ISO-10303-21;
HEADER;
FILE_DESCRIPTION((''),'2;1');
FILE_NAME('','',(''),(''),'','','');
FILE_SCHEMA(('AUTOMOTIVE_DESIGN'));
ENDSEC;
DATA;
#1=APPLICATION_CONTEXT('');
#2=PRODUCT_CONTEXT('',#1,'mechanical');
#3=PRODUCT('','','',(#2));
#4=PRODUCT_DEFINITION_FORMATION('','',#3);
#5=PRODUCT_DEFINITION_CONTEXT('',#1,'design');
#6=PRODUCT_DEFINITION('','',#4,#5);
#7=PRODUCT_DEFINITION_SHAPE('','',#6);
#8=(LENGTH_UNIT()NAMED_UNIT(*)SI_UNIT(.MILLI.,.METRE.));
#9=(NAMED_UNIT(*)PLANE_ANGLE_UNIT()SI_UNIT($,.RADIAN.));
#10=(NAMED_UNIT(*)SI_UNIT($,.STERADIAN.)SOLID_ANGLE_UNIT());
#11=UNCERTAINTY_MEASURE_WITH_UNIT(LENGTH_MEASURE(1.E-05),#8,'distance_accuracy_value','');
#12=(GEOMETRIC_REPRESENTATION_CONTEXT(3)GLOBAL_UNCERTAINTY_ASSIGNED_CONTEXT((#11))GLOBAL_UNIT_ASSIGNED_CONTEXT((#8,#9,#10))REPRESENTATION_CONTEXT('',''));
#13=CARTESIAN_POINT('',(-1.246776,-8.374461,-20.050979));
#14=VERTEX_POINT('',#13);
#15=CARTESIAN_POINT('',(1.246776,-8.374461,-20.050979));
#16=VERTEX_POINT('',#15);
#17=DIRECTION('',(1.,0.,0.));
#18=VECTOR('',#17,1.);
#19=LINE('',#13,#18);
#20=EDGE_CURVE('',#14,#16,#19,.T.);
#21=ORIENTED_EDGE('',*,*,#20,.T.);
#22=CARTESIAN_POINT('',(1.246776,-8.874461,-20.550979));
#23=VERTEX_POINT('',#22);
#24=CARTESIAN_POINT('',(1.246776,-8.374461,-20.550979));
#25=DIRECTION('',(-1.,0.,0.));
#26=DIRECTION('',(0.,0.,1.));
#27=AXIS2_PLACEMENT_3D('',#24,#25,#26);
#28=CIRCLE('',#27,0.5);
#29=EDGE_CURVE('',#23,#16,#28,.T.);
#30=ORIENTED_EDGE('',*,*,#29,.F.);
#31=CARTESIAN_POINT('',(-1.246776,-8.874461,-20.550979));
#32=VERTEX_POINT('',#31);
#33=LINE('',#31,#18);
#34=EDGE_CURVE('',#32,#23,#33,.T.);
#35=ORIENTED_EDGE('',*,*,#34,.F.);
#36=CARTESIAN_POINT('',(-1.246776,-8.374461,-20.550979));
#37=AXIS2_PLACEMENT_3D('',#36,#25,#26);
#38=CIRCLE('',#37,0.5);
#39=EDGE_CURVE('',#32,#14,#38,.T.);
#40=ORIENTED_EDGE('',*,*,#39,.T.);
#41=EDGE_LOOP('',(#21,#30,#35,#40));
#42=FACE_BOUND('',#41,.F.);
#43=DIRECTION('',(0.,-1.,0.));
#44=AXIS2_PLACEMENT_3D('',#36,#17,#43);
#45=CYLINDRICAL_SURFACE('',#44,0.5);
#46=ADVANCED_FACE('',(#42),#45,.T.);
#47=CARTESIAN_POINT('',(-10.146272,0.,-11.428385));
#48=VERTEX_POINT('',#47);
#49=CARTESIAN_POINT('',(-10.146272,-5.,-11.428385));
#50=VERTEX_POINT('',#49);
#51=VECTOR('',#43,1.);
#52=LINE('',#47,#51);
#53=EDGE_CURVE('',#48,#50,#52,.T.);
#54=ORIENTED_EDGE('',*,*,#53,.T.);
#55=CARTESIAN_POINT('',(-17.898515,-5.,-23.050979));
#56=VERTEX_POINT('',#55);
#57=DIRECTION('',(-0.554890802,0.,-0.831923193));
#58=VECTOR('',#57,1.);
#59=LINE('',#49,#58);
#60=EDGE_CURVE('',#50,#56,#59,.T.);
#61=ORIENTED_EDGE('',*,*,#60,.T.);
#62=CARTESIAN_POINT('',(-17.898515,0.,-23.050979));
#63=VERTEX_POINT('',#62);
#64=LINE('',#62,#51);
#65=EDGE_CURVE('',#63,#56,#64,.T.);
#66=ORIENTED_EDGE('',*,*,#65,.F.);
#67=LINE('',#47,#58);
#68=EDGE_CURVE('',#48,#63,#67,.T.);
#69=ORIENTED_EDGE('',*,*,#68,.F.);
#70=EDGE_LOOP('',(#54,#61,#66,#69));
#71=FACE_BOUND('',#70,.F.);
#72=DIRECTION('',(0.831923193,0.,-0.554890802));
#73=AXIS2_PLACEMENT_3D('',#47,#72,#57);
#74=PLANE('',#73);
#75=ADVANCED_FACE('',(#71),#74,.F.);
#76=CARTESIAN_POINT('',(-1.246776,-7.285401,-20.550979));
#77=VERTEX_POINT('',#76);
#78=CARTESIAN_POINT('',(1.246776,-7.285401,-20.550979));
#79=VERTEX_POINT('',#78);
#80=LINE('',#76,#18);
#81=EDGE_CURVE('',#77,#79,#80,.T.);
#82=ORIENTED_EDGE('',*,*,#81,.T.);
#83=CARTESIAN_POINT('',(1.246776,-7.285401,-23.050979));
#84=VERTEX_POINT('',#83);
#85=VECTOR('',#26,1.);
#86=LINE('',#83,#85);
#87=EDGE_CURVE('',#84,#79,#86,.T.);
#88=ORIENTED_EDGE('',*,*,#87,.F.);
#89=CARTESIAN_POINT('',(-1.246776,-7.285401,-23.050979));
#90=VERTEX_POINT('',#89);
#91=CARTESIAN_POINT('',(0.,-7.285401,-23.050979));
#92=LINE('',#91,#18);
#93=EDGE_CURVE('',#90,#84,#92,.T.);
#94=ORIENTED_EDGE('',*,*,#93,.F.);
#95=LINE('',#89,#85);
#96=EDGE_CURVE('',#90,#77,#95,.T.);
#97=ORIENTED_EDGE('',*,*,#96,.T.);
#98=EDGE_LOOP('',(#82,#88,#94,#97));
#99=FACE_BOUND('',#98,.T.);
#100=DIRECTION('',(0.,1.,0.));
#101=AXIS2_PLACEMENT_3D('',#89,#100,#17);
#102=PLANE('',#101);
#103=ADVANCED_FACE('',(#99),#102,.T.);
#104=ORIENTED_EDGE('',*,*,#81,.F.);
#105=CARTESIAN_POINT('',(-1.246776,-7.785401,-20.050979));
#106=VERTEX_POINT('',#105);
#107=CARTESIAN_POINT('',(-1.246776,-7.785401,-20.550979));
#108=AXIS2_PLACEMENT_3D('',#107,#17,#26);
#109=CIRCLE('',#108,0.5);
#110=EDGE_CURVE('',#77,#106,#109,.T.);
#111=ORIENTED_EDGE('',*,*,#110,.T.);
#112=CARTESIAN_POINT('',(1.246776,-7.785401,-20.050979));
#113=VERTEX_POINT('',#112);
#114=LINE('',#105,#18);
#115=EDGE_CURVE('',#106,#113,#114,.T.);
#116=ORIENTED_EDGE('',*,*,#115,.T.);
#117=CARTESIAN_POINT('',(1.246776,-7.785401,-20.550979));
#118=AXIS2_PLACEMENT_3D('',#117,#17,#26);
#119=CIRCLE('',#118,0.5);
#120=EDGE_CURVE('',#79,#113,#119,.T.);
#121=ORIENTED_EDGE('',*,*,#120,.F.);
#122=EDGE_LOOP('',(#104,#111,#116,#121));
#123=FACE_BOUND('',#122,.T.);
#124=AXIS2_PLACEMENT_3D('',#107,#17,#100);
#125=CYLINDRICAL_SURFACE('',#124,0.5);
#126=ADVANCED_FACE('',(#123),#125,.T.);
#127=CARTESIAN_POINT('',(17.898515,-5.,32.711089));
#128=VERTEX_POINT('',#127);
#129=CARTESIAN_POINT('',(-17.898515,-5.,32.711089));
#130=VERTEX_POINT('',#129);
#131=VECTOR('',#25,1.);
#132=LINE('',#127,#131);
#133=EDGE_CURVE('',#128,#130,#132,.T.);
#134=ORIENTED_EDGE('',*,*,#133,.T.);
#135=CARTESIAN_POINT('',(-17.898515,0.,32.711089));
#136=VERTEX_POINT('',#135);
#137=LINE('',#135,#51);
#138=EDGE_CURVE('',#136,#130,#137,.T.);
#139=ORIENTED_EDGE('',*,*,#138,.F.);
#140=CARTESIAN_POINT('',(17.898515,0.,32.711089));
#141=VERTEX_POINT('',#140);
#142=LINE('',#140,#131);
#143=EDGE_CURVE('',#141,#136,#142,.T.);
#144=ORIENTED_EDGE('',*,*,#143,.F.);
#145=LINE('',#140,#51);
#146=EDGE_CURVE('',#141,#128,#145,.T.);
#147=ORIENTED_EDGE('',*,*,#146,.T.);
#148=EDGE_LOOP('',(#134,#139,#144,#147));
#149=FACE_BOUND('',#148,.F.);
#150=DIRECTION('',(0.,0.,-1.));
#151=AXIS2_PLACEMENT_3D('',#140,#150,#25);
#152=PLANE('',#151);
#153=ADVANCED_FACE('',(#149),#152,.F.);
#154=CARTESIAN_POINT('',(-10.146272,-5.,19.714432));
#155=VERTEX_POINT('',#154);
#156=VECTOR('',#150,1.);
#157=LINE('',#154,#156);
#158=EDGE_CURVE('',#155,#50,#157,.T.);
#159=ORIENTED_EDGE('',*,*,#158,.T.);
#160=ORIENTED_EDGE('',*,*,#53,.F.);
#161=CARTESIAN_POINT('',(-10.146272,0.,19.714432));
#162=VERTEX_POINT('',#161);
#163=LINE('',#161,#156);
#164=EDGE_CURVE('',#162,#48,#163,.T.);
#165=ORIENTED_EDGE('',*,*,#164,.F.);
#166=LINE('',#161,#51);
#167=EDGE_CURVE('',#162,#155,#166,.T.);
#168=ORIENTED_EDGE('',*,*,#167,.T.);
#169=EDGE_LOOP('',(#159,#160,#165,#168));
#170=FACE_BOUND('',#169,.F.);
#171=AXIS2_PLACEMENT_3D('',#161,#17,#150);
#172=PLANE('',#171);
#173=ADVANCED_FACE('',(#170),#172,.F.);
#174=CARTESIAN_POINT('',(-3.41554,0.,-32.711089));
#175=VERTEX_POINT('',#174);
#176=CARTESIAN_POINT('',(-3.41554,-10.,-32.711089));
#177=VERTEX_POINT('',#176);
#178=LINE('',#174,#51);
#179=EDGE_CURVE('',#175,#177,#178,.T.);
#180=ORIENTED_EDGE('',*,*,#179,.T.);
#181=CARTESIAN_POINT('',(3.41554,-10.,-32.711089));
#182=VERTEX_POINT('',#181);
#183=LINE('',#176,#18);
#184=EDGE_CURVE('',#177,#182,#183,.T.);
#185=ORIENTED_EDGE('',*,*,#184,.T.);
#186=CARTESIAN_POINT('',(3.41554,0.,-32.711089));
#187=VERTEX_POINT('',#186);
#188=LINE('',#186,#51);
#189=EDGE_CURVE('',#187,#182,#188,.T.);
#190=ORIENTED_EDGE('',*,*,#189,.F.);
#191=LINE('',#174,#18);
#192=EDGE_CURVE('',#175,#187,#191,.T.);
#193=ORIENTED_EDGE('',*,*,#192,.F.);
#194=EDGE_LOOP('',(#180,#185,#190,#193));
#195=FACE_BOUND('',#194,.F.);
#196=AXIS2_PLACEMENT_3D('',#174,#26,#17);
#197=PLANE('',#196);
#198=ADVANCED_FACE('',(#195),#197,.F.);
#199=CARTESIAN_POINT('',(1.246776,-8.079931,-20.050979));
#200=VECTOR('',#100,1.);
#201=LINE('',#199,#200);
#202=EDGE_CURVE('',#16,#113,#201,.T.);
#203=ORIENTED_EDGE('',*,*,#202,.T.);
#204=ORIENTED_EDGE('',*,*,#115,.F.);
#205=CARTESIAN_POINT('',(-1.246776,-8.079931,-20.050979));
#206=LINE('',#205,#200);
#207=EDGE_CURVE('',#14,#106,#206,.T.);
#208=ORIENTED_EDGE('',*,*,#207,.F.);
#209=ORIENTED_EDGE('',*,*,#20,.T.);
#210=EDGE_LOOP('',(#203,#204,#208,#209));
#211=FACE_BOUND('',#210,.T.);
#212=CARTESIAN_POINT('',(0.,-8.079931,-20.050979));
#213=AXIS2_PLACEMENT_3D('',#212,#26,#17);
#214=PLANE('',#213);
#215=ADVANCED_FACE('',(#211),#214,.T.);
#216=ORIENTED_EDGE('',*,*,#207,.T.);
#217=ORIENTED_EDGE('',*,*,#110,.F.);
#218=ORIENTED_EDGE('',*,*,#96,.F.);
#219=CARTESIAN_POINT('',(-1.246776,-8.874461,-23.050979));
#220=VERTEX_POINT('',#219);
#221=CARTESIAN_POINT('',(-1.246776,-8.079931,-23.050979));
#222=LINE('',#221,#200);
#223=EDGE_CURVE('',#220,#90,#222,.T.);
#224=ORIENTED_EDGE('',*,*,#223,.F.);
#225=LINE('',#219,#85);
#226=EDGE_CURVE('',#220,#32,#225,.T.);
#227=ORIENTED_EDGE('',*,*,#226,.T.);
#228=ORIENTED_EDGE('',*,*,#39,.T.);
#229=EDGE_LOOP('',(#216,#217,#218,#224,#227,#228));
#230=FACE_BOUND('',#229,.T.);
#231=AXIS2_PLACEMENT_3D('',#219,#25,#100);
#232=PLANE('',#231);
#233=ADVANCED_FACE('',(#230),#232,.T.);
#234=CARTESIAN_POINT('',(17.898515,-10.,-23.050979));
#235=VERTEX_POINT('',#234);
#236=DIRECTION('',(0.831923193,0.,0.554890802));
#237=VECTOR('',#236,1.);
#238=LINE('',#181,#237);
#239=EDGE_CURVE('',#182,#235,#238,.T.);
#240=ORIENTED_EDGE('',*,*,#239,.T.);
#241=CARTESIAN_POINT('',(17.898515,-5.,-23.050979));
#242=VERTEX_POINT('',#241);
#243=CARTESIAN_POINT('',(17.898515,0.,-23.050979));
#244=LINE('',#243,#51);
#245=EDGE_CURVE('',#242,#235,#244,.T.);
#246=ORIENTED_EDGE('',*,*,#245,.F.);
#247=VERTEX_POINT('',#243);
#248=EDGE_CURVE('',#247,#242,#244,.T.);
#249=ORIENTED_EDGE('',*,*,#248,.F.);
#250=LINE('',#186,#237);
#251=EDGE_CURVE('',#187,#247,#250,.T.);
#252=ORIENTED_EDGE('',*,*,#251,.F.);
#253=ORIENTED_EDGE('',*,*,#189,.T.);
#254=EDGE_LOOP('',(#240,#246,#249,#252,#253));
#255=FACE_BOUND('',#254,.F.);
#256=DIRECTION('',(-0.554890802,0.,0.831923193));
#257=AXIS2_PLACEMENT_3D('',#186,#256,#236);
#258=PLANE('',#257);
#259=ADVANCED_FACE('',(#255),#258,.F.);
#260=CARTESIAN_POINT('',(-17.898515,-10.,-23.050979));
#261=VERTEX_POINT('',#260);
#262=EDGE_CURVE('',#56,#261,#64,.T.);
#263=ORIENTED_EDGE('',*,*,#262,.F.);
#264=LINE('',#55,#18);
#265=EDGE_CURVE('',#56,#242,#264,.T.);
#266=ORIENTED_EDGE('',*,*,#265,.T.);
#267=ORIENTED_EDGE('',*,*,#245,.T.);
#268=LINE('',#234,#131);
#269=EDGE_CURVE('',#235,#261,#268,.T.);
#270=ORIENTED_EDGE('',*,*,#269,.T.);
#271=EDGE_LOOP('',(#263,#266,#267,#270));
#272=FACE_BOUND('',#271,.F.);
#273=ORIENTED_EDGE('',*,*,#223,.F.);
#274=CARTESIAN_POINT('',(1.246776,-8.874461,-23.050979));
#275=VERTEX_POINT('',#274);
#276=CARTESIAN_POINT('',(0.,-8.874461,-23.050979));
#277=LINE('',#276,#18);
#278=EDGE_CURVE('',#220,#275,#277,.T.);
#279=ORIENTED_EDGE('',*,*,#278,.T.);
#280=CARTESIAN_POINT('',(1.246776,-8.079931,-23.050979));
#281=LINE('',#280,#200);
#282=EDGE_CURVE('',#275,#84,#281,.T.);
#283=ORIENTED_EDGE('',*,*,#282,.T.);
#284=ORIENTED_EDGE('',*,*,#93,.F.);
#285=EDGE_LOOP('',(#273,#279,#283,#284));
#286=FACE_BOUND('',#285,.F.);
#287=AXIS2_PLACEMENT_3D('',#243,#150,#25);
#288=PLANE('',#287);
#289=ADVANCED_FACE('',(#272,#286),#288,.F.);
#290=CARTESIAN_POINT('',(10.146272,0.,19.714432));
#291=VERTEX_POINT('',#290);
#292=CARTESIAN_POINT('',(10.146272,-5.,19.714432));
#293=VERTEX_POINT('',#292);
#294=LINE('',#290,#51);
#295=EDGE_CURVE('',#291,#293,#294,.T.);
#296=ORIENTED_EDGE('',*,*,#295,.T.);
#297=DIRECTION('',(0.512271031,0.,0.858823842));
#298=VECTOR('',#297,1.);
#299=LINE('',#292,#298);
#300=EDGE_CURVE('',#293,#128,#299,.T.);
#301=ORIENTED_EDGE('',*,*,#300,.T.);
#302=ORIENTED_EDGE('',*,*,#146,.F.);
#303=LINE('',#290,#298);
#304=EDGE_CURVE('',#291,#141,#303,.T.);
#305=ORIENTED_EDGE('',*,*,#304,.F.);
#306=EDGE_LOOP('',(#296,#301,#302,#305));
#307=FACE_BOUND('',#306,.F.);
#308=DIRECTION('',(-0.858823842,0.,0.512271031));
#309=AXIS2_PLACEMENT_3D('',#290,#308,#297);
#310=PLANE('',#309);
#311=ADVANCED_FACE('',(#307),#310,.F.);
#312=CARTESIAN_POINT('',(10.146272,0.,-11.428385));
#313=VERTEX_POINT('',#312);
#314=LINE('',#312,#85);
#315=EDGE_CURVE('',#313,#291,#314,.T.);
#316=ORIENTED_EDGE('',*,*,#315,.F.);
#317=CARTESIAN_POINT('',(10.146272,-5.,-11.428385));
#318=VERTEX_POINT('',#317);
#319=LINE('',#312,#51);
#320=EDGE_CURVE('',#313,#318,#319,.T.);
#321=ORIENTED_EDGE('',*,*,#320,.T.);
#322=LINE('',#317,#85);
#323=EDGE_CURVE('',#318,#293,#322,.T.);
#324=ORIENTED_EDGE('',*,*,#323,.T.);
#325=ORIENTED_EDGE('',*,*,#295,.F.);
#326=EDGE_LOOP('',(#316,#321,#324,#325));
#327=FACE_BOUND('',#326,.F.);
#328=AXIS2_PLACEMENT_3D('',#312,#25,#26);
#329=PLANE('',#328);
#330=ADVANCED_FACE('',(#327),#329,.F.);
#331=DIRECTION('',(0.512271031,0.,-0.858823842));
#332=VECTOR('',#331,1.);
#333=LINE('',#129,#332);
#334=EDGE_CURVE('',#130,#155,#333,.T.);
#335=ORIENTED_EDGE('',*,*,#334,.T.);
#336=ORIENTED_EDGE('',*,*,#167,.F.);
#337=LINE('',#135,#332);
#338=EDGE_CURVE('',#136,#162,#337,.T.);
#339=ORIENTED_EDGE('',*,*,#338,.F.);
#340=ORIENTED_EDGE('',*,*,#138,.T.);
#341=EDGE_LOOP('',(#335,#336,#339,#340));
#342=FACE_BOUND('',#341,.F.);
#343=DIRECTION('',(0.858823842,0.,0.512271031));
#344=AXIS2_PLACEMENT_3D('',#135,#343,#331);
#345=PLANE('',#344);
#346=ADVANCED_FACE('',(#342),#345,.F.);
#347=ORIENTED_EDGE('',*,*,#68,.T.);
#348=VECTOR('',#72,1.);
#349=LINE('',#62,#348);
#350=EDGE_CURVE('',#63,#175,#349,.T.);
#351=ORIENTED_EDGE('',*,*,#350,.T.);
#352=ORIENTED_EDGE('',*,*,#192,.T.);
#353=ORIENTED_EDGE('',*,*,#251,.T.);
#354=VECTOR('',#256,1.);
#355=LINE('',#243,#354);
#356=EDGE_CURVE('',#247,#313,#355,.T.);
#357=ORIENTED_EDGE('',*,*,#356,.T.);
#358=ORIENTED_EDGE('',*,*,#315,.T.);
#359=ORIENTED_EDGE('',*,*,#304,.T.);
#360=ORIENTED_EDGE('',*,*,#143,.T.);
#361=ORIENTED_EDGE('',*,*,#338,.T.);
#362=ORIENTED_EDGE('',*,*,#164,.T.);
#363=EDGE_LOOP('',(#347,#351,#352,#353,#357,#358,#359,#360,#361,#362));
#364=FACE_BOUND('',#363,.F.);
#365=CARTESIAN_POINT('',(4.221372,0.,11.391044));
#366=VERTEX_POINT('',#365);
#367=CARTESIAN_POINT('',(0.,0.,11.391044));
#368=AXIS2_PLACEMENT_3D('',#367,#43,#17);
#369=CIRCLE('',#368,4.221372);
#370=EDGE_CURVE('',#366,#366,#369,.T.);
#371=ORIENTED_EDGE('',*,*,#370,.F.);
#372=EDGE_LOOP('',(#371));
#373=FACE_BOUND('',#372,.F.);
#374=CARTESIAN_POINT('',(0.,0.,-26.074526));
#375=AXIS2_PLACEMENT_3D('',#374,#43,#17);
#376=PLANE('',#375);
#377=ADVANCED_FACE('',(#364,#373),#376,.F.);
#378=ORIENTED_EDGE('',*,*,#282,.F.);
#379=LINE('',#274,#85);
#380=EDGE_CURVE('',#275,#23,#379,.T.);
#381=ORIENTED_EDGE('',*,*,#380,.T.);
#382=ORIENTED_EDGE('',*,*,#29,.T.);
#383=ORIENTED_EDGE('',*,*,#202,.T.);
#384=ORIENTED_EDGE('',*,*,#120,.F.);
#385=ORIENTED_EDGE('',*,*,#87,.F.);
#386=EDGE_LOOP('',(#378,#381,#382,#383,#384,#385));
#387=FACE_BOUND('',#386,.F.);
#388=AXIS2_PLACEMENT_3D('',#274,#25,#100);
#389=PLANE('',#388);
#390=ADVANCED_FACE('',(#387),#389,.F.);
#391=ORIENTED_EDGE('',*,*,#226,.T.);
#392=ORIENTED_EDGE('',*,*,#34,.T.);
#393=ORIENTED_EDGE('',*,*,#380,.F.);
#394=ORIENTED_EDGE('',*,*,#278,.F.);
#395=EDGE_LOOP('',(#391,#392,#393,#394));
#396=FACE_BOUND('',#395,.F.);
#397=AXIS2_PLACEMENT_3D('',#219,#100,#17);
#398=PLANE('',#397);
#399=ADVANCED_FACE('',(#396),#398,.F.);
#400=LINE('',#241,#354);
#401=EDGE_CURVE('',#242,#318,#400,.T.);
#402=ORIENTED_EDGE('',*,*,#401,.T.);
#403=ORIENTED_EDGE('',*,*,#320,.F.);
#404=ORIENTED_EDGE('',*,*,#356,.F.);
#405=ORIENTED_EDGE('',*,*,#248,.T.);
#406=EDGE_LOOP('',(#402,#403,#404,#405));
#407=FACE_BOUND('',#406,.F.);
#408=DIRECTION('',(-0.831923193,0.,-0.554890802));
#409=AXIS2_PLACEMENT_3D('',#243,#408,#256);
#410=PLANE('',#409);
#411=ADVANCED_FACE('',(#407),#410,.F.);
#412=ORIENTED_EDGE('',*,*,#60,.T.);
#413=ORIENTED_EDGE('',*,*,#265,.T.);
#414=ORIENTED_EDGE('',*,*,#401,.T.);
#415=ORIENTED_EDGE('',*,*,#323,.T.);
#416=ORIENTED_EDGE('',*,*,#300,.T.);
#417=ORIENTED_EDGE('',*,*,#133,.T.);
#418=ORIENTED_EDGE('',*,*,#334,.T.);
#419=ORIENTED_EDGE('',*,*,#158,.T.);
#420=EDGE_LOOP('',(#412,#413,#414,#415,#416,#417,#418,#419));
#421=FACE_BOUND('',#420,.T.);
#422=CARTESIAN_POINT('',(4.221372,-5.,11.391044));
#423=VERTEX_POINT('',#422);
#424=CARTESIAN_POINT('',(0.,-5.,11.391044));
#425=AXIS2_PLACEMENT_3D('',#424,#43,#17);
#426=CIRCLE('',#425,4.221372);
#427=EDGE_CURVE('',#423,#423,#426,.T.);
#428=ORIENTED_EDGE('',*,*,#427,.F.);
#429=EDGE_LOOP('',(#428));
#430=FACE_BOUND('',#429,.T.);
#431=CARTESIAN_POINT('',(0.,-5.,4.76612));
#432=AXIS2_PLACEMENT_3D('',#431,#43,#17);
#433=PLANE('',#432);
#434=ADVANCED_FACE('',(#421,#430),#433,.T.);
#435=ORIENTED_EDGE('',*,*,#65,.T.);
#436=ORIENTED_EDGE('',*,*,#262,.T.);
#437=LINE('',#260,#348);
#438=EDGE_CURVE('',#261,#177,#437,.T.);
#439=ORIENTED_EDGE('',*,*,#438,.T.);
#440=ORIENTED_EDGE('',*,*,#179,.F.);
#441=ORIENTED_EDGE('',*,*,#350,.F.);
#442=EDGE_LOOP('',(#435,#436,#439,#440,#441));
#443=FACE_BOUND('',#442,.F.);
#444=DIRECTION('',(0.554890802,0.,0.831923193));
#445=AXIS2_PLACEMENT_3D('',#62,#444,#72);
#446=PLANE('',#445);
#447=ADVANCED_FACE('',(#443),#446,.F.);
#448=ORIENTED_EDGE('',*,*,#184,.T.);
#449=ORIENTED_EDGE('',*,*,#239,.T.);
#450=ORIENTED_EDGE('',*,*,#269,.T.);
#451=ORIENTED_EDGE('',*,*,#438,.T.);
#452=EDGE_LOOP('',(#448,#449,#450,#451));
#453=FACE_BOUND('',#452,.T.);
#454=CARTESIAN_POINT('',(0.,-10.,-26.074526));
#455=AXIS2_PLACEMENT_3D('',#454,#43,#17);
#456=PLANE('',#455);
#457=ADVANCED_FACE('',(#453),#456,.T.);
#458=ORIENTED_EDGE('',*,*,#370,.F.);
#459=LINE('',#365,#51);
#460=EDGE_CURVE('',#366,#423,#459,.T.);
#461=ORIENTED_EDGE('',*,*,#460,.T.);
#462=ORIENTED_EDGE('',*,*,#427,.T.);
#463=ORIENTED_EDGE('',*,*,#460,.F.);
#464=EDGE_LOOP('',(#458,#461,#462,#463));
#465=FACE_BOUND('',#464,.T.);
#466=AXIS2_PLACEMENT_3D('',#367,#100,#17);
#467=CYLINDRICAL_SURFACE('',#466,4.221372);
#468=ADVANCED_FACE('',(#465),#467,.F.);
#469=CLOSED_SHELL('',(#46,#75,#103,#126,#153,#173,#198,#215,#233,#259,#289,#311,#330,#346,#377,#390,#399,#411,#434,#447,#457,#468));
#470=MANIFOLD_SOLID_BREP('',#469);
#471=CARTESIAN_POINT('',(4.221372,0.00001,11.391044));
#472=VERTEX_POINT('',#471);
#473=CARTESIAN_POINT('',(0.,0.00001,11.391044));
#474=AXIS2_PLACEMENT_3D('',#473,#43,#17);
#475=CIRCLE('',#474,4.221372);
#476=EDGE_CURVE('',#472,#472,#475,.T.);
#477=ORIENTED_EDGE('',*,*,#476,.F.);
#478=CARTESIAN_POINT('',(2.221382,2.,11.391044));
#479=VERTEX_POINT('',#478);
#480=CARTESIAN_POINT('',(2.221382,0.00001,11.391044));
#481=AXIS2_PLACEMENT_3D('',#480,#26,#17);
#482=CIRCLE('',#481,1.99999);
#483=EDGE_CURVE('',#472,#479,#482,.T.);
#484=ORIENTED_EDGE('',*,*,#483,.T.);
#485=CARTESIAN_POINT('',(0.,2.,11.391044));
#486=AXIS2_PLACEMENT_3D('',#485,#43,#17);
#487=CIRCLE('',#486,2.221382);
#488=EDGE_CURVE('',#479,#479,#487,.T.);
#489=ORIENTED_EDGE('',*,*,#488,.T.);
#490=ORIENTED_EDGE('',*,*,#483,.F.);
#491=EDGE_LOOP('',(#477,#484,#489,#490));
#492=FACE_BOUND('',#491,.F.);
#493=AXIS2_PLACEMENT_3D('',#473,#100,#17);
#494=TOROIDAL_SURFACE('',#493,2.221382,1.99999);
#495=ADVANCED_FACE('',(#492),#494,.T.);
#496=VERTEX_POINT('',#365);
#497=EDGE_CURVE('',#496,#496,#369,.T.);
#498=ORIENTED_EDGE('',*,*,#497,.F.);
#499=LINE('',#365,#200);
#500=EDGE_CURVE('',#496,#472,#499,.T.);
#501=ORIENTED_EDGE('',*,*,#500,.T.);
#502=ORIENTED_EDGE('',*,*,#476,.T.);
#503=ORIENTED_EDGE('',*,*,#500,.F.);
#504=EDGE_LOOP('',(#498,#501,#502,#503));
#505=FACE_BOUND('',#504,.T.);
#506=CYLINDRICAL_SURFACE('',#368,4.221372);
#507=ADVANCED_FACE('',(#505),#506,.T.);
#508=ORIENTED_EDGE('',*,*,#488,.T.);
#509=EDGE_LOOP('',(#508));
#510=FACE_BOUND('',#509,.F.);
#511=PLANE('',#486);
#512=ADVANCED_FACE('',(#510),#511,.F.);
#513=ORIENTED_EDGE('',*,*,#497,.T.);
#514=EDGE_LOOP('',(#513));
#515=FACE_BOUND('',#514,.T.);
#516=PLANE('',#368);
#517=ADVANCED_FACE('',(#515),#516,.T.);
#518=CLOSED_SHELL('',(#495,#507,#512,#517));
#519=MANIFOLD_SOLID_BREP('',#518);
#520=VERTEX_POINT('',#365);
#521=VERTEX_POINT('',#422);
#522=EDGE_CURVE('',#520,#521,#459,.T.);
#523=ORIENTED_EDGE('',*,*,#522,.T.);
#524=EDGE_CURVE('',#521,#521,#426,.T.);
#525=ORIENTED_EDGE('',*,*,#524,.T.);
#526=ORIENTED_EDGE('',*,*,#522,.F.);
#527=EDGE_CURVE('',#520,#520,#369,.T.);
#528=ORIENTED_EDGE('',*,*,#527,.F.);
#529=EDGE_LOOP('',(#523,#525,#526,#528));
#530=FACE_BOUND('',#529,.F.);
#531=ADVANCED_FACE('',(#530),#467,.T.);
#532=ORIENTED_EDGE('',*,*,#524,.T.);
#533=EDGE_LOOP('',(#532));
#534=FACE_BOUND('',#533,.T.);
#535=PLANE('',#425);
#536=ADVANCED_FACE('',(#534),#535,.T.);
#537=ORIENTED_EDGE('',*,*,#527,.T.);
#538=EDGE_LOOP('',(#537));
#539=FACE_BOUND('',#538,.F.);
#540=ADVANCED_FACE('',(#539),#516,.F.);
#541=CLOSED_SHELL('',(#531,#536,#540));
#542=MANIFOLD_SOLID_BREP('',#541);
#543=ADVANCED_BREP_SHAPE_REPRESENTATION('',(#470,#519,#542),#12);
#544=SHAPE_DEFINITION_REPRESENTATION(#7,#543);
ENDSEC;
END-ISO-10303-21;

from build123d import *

# Parameters (mm, degrees)
F0_R     = 4.2213718129
F1_DEPTH = 5
F2_DEPTH = 10
F3_DEPTH = 2
F4_R     = 1.99999
F5_DEPTH = 5
F6_W     = 2.4935528636
F6_H     = 1.5890598297
F7_DEPTH = 3
F8_R     = 0.5


# Not quite as in the source:
# - a fillet or chamfer is up to 0.001 mm smaller than in the source, because OpenCascade refuses the exact size


with BuildPart() as f1:
    # F0 (on Front) → F1 (new body)
    with BuildSketch(Plane.XZ):
        Polygon((-17.8985148668, -23.0509787798), (17.8985148668, -23.0509787798), (10.1462722469, -11.4283849092), (10.1462722469, 19.7144318372), (17.8985148668, 32.7110886574), (-17.8985148668, 32.7110886574), (-10.1462722469, 19.7144318372), (-10.1462722469, -11.4283849092), align=None)
        with Locations((0, 11.391043663)):
            Circle(F0_R, mode=Mode.SUBTRACT)
    extrude(amount=F1_DEPTH)

    # F0 (on Front) → F2 (join)
    with BuildSketch(Plane.XZ):
        Polygon((-3.4155401514, -32.7110886574), (3.4155401514, -32.7110886574), (17.8985148668, -23.0509787798), (-17.8985148668, -23.0509787798), align=None)
    extrude(amount=F2_DEPTH)

    # F6 (on face) → F7 (join)
    with BuildSketch(Plane.XY.offset(-23.0509787798)):
        with Locations((0, -8.0799311399)):
            Rectangle(F6_W, F6_H)
    extrude(amount=F7_DEPTH)

    # F8
    f8_edges = [f1.edges().sort_by_distance(p)[0] for p in [
        (0, -8.874461, -20.050979),
        (0, -7.285401, -20.050979),
    ]]
    fillet(f8_edges, radius=F8_R)


with BuildPart() as f3:
    # F0 (on Front) → F3 (new body)
    with BuildSketch(Plane.XZ):
        with Locations((0, 11.391043663)):
            Circle(F0_R)
    extrude(amount=-F3_DEPTH)

    # F4 (radius 2 in the source; OpenCascade refuses exactly that, so slightly less here)
    f4_edges = [f3.edges().sort_by_distance(p)[0] for p in [
        (-4.221372, 2, 11.391044),
    ]]
    fillet(f4_edges, radius=F4_R)


with BuildPart() as f5:
    # F0 (on Front) → F5 (new body)
    with BuildSketch(Plane.XZ):
        with Locations((0, 11.391043663)):
            Circle(F0_R)
    extrude(amount=F5_DEPTH)


solid = Compound([f1.part, f3.part, f5.part])
